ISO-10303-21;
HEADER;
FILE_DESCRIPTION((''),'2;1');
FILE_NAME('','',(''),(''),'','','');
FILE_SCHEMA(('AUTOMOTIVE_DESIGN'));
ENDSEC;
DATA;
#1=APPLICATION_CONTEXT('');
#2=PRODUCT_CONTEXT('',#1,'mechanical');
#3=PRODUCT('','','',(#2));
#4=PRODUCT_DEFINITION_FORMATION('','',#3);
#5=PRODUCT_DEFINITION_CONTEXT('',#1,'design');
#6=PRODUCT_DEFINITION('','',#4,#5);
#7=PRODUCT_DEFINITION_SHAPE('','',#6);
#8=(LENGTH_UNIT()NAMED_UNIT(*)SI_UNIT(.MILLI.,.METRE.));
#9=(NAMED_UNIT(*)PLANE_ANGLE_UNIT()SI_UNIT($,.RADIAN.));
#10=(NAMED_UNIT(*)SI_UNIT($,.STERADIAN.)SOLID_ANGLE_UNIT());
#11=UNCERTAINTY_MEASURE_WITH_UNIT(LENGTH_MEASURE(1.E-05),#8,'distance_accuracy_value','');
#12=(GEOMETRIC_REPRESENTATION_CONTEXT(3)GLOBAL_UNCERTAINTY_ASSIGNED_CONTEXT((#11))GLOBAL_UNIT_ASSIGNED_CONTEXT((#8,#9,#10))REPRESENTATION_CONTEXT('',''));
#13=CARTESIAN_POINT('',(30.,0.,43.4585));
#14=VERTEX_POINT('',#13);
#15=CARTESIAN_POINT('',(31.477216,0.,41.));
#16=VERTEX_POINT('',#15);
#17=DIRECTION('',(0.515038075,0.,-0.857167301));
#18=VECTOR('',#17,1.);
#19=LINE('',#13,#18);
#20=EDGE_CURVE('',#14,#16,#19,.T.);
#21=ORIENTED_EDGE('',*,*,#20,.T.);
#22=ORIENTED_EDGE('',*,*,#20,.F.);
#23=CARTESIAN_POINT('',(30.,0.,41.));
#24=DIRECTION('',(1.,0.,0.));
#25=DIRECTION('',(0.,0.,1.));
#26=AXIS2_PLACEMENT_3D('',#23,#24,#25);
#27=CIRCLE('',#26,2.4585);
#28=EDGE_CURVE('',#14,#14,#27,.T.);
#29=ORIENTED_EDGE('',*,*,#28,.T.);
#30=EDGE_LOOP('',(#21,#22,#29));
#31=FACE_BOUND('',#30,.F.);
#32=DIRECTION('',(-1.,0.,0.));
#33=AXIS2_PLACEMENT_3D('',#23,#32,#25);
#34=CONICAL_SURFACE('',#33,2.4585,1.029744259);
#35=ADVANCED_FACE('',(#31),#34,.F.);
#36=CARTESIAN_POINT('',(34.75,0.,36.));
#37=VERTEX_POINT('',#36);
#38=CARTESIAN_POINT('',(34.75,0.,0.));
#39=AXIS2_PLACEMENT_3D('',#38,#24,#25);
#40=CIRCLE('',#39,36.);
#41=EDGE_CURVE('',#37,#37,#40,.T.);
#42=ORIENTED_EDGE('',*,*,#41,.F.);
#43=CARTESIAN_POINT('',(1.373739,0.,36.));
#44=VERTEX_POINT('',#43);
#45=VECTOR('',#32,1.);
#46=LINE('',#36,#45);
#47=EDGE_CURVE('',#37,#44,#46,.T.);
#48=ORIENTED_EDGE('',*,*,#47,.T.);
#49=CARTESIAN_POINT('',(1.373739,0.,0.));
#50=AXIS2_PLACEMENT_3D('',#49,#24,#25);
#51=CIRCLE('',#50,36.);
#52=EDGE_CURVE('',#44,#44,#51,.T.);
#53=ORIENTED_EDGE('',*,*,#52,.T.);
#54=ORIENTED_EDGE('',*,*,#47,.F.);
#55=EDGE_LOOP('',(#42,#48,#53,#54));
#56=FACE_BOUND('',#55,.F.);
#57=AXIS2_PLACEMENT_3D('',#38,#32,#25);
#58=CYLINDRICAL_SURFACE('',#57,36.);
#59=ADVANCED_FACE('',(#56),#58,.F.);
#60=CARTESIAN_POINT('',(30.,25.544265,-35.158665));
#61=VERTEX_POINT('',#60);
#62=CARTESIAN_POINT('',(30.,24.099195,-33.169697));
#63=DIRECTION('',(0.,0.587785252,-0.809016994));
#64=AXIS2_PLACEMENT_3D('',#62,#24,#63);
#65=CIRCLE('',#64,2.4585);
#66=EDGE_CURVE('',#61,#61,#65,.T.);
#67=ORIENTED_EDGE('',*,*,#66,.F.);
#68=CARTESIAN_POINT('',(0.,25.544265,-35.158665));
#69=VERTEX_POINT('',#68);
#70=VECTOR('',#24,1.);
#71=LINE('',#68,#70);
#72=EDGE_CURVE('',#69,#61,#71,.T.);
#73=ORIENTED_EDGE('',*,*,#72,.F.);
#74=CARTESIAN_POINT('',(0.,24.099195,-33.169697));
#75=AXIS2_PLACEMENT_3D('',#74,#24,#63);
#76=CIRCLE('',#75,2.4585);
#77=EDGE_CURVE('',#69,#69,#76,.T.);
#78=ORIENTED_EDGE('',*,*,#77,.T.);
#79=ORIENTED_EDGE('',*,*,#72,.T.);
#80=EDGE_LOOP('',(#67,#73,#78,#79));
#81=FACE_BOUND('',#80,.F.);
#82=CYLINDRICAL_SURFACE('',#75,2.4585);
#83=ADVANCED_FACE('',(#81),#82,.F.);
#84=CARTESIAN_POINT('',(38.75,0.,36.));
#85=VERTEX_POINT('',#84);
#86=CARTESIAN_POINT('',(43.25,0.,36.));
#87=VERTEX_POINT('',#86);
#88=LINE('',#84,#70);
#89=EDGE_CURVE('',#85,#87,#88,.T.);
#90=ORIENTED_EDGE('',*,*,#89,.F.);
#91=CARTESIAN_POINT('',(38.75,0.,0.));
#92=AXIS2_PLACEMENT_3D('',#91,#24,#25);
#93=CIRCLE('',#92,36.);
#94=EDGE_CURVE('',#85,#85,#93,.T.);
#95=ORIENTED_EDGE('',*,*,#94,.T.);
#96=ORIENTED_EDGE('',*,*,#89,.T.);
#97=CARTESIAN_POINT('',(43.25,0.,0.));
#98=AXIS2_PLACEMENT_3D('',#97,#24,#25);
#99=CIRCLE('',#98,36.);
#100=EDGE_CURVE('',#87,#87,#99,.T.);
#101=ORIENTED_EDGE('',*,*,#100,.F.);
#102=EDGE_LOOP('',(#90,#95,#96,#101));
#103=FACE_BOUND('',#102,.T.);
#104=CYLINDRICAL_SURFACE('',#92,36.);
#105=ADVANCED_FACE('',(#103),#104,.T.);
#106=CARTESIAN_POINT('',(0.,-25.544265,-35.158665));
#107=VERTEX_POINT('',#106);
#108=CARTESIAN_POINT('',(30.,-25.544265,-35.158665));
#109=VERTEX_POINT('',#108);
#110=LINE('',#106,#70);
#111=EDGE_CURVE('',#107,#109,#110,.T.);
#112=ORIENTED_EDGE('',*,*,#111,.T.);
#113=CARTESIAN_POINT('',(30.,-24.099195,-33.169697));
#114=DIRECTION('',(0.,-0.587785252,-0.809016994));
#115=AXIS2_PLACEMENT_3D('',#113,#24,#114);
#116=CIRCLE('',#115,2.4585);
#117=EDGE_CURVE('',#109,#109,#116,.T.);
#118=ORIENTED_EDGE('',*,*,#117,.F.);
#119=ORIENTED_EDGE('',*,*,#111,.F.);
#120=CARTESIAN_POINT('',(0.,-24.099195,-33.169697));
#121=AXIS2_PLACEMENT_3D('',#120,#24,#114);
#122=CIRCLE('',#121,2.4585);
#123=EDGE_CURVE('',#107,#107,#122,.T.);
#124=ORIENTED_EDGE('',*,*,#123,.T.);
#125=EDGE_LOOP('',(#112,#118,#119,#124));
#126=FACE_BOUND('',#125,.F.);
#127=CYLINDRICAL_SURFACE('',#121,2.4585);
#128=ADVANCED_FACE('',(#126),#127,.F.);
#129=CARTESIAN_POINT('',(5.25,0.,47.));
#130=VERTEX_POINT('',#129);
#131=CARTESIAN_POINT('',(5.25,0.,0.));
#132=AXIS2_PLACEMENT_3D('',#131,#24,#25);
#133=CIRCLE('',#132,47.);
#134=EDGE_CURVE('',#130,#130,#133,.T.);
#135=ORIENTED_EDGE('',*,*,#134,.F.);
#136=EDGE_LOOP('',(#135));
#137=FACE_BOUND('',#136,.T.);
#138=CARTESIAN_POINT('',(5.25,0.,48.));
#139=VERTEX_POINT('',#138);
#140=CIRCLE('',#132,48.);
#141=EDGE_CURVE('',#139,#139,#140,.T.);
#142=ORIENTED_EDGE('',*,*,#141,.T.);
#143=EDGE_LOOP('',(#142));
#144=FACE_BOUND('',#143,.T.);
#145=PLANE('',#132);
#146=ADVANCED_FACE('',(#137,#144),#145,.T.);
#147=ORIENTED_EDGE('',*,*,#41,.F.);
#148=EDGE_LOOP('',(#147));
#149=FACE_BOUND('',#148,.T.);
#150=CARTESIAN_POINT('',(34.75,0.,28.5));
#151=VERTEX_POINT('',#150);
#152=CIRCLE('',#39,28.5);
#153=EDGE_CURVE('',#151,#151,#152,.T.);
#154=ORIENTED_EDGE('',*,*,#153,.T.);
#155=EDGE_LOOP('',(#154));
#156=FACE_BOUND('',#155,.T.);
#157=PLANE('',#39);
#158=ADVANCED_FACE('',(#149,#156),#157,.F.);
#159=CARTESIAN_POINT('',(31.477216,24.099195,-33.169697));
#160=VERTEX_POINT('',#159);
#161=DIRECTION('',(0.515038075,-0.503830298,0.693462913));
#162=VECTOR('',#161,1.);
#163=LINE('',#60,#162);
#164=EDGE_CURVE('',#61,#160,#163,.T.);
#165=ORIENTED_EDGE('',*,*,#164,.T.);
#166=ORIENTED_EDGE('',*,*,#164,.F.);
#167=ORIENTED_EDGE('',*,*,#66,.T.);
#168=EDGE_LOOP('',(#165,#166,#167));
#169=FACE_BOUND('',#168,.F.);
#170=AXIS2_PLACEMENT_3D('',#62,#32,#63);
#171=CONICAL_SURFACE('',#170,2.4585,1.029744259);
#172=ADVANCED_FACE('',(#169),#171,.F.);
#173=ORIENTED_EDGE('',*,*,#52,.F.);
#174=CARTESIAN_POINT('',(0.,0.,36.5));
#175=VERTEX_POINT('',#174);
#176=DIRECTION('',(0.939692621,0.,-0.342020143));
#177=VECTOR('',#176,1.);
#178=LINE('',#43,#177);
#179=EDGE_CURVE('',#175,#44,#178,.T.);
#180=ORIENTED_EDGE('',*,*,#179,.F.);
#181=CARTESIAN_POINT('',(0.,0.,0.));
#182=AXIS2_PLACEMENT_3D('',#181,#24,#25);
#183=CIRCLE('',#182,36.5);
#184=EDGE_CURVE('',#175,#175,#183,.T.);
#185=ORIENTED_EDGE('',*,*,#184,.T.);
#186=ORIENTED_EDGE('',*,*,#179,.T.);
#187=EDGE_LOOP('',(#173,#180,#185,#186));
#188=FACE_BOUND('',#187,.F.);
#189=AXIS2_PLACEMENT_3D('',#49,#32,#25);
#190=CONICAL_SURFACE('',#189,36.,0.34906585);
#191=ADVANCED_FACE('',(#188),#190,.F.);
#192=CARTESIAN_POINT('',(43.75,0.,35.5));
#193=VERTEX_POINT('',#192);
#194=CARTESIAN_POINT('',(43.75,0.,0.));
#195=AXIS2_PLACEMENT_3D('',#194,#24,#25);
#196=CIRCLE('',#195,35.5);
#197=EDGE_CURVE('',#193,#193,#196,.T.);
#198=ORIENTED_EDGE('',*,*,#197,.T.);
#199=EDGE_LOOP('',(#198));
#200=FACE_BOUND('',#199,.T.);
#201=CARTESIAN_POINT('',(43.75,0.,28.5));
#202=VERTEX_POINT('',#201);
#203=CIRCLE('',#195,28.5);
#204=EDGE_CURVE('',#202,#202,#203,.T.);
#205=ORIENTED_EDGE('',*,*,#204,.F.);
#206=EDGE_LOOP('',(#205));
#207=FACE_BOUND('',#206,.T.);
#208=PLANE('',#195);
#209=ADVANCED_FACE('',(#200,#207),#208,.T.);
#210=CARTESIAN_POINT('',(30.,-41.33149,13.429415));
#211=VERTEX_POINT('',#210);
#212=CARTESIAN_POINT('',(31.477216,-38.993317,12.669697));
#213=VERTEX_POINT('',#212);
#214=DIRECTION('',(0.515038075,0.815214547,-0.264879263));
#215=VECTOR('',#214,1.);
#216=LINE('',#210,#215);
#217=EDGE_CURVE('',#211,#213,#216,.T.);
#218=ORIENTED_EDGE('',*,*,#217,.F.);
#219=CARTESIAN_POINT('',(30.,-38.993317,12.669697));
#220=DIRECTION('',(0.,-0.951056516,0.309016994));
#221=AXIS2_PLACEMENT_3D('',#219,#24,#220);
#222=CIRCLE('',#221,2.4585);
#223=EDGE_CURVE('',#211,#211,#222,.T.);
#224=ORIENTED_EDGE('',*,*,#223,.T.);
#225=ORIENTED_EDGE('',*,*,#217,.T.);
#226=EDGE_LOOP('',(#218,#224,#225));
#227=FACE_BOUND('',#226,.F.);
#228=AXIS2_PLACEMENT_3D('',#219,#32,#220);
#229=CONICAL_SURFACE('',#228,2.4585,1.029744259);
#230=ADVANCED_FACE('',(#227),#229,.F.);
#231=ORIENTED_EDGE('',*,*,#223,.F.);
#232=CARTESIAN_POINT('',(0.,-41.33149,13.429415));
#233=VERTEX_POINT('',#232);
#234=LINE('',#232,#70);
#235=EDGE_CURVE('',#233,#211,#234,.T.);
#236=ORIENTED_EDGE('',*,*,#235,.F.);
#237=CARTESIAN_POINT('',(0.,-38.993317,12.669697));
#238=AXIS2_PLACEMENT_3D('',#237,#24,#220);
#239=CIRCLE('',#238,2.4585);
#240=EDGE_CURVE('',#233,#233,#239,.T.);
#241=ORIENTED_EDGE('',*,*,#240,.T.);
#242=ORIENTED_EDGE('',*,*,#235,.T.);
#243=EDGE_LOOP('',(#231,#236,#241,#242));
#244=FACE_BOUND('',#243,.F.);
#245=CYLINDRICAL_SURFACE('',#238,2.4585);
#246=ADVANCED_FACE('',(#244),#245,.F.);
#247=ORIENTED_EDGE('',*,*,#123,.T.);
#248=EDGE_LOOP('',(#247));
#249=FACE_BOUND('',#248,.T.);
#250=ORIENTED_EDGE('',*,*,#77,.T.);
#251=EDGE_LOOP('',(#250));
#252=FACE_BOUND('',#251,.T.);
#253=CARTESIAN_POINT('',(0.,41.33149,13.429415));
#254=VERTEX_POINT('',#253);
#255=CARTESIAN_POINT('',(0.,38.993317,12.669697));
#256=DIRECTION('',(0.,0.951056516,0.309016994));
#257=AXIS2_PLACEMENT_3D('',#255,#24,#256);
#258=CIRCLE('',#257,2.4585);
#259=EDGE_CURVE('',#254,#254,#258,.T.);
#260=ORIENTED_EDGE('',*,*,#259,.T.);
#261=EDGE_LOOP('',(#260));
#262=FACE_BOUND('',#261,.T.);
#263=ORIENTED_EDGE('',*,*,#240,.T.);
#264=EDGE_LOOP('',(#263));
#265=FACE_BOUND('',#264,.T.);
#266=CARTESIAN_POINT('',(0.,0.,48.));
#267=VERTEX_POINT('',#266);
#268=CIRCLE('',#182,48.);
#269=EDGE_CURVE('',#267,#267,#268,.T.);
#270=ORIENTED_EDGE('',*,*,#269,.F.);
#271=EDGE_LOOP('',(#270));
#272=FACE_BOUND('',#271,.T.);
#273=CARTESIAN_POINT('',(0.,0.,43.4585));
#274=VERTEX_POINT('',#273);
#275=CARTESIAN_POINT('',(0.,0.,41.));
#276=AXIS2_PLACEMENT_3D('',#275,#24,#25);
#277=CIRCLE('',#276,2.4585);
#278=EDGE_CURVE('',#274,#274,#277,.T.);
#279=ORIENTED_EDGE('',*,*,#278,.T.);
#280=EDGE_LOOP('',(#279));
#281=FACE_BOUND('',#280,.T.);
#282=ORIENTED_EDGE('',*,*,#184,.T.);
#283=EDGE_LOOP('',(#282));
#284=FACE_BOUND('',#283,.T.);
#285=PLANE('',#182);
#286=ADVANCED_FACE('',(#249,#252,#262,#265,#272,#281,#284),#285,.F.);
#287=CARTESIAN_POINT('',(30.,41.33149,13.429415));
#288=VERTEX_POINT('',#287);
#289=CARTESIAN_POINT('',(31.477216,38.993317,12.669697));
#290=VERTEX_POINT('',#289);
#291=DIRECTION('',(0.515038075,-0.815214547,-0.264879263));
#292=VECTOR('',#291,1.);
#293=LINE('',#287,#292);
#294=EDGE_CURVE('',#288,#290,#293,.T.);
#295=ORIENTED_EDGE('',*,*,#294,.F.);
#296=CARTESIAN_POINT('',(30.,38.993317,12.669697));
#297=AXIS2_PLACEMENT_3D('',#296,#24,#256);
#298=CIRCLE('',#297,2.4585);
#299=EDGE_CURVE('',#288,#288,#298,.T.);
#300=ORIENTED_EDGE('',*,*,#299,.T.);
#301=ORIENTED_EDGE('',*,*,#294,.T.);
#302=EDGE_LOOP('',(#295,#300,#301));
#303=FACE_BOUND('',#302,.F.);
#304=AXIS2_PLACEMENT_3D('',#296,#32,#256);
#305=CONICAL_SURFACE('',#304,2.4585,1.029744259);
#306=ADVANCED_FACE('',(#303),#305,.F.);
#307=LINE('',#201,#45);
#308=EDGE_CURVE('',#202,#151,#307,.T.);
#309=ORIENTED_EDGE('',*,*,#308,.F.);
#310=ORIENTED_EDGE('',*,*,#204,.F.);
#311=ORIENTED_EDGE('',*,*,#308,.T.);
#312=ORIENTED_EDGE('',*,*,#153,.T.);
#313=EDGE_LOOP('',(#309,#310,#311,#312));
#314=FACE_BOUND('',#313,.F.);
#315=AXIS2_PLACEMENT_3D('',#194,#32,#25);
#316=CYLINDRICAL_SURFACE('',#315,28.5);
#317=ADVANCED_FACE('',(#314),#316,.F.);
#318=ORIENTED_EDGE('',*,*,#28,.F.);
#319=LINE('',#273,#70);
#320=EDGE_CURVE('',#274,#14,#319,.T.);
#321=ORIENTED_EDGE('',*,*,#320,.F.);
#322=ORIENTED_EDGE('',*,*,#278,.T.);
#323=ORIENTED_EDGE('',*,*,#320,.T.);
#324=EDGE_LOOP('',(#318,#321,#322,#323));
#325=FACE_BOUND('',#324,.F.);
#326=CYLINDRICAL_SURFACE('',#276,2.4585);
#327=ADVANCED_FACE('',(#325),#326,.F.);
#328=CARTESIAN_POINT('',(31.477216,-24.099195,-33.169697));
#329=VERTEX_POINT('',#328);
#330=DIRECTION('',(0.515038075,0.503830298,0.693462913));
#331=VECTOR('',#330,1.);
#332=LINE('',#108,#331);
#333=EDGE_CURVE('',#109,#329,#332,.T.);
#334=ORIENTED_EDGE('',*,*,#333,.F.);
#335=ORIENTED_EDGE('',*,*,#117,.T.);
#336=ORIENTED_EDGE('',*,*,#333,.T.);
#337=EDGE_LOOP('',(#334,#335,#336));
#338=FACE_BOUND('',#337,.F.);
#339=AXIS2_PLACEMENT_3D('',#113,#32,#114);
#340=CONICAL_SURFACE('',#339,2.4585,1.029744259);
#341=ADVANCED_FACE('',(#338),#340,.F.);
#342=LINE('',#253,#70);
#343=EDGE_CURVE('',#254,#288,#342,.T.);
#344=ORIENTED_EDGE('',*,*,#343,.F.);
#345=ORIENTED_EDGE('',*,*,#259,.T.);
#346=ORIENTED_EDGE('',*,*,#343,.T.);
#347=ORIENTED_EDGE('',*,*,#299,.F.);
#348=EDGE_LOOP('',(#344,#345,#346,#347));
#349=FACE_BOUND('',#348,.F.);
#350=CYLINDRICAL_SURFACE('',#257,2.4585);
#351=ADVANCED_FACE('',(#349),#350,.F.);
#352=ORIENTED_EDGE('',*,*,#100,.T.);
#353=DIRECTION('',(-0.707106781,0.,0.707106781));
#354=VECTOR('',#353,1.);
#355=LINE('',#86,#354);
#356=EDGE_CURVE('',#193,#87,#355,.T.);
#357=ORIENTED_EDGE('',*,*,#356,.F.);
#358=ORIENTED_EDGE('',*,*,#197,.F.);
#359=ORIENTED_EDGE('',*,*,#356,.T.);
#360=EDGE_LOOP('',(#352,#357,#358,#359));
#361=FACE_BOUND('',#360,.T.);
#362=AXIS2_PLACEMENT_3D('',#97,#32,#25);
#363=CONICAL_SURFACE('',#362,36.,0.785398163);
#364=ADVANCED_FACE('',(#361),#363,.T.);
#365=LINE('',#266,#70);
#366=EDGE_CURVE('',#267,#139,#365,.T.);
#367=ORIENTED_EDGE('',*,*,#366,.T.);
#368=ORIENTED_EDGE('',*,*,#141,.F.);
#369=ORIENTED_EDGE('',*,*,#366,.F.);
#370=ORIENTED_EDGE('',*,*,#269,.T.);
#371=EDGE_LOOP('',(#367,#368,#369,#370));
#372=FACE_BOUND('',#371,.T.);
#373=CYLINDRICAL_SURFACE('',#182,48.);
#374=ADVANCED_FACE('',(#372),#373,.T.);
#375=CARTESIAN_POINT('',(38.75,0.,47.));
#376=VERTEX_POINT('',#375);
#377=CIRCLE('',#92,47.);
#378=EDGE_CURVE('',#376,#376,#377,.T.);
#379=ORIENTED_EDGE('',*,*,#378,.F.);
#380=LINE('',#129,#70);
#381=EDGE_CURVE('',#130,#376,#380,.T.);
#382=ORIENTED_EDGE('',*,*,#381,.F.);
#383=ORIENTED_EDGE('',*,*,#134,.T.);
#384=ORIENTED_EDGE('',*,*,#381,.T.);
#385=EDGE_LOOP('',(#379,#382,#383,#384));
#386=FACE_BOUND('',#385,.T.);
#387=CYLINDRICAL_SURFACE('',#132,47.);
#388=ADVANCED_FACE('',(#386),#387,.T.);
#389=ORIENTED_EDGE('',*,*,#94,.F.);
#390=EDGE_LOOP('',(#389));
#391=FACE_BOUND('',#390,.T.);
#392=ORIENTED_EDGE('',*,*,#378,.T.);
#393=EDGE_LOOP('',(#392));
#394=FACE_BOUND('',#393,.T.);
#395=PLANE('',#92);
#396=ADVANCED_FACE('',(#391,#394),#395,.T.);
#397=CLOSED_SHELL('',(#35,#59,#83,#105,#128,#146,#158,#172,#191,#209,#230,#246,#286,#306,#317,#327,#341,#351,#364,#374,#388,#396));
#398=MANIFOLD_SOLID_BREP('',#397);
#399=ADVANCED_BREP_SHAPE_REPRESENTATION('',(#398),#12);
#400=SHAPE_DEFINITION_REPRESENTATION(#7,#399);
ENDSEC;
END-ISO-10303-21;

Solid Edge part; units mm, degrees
sketch "Sketch1" plane through (0, 0, 0) normal (0, -1, 0) x (1, 0, 0)
  line L0 (34.75, 36) -> (0, 36)
  line L1 (0, 36) -> (0, 48)
  line L2 (0, 48) -> (5.25, 48)
  line L3 (5.25, 48) -> (5.25, 47)
  line L4 (5.25, 47) -> (38.75, 47)
  line L5 (38.75, 47) -> (38.75, 36)
  line L6 (38.75, 36) -> (43.75, 36)
  line L7 (43.75, 36) -> (43.75, 28.5)
  line L8 (43.75, 28.5) -> (34.75, 28.5)
  line L9 (34.75, 28.5) -> (34.75, 36)
revolve "RevolvedProtrusion1" add sketch "Sketch1" angle 360 about axis through (0, 0, 0) along (1, 0, 0)
chamfer "Chamfer_1" distance 0.5 angle 70 1 edges at (0, 0, -36) measured on face at (0, 31.04, 32.96)
hole "Hole_9" at (0, 0, 41) direction (1, 0, 0) diameter 4.917 depth 30 tip angle 118 thread major 6 thread length 20
pattern_circular "Pattern_2" count 5 over 360 about axis through (0, 0, 0) along (1, 0, 0) of "Hole_9"
chamfer "Chamfer_3" distance 0.5 angle 45 1 edges at (43.75, 0, -36)
